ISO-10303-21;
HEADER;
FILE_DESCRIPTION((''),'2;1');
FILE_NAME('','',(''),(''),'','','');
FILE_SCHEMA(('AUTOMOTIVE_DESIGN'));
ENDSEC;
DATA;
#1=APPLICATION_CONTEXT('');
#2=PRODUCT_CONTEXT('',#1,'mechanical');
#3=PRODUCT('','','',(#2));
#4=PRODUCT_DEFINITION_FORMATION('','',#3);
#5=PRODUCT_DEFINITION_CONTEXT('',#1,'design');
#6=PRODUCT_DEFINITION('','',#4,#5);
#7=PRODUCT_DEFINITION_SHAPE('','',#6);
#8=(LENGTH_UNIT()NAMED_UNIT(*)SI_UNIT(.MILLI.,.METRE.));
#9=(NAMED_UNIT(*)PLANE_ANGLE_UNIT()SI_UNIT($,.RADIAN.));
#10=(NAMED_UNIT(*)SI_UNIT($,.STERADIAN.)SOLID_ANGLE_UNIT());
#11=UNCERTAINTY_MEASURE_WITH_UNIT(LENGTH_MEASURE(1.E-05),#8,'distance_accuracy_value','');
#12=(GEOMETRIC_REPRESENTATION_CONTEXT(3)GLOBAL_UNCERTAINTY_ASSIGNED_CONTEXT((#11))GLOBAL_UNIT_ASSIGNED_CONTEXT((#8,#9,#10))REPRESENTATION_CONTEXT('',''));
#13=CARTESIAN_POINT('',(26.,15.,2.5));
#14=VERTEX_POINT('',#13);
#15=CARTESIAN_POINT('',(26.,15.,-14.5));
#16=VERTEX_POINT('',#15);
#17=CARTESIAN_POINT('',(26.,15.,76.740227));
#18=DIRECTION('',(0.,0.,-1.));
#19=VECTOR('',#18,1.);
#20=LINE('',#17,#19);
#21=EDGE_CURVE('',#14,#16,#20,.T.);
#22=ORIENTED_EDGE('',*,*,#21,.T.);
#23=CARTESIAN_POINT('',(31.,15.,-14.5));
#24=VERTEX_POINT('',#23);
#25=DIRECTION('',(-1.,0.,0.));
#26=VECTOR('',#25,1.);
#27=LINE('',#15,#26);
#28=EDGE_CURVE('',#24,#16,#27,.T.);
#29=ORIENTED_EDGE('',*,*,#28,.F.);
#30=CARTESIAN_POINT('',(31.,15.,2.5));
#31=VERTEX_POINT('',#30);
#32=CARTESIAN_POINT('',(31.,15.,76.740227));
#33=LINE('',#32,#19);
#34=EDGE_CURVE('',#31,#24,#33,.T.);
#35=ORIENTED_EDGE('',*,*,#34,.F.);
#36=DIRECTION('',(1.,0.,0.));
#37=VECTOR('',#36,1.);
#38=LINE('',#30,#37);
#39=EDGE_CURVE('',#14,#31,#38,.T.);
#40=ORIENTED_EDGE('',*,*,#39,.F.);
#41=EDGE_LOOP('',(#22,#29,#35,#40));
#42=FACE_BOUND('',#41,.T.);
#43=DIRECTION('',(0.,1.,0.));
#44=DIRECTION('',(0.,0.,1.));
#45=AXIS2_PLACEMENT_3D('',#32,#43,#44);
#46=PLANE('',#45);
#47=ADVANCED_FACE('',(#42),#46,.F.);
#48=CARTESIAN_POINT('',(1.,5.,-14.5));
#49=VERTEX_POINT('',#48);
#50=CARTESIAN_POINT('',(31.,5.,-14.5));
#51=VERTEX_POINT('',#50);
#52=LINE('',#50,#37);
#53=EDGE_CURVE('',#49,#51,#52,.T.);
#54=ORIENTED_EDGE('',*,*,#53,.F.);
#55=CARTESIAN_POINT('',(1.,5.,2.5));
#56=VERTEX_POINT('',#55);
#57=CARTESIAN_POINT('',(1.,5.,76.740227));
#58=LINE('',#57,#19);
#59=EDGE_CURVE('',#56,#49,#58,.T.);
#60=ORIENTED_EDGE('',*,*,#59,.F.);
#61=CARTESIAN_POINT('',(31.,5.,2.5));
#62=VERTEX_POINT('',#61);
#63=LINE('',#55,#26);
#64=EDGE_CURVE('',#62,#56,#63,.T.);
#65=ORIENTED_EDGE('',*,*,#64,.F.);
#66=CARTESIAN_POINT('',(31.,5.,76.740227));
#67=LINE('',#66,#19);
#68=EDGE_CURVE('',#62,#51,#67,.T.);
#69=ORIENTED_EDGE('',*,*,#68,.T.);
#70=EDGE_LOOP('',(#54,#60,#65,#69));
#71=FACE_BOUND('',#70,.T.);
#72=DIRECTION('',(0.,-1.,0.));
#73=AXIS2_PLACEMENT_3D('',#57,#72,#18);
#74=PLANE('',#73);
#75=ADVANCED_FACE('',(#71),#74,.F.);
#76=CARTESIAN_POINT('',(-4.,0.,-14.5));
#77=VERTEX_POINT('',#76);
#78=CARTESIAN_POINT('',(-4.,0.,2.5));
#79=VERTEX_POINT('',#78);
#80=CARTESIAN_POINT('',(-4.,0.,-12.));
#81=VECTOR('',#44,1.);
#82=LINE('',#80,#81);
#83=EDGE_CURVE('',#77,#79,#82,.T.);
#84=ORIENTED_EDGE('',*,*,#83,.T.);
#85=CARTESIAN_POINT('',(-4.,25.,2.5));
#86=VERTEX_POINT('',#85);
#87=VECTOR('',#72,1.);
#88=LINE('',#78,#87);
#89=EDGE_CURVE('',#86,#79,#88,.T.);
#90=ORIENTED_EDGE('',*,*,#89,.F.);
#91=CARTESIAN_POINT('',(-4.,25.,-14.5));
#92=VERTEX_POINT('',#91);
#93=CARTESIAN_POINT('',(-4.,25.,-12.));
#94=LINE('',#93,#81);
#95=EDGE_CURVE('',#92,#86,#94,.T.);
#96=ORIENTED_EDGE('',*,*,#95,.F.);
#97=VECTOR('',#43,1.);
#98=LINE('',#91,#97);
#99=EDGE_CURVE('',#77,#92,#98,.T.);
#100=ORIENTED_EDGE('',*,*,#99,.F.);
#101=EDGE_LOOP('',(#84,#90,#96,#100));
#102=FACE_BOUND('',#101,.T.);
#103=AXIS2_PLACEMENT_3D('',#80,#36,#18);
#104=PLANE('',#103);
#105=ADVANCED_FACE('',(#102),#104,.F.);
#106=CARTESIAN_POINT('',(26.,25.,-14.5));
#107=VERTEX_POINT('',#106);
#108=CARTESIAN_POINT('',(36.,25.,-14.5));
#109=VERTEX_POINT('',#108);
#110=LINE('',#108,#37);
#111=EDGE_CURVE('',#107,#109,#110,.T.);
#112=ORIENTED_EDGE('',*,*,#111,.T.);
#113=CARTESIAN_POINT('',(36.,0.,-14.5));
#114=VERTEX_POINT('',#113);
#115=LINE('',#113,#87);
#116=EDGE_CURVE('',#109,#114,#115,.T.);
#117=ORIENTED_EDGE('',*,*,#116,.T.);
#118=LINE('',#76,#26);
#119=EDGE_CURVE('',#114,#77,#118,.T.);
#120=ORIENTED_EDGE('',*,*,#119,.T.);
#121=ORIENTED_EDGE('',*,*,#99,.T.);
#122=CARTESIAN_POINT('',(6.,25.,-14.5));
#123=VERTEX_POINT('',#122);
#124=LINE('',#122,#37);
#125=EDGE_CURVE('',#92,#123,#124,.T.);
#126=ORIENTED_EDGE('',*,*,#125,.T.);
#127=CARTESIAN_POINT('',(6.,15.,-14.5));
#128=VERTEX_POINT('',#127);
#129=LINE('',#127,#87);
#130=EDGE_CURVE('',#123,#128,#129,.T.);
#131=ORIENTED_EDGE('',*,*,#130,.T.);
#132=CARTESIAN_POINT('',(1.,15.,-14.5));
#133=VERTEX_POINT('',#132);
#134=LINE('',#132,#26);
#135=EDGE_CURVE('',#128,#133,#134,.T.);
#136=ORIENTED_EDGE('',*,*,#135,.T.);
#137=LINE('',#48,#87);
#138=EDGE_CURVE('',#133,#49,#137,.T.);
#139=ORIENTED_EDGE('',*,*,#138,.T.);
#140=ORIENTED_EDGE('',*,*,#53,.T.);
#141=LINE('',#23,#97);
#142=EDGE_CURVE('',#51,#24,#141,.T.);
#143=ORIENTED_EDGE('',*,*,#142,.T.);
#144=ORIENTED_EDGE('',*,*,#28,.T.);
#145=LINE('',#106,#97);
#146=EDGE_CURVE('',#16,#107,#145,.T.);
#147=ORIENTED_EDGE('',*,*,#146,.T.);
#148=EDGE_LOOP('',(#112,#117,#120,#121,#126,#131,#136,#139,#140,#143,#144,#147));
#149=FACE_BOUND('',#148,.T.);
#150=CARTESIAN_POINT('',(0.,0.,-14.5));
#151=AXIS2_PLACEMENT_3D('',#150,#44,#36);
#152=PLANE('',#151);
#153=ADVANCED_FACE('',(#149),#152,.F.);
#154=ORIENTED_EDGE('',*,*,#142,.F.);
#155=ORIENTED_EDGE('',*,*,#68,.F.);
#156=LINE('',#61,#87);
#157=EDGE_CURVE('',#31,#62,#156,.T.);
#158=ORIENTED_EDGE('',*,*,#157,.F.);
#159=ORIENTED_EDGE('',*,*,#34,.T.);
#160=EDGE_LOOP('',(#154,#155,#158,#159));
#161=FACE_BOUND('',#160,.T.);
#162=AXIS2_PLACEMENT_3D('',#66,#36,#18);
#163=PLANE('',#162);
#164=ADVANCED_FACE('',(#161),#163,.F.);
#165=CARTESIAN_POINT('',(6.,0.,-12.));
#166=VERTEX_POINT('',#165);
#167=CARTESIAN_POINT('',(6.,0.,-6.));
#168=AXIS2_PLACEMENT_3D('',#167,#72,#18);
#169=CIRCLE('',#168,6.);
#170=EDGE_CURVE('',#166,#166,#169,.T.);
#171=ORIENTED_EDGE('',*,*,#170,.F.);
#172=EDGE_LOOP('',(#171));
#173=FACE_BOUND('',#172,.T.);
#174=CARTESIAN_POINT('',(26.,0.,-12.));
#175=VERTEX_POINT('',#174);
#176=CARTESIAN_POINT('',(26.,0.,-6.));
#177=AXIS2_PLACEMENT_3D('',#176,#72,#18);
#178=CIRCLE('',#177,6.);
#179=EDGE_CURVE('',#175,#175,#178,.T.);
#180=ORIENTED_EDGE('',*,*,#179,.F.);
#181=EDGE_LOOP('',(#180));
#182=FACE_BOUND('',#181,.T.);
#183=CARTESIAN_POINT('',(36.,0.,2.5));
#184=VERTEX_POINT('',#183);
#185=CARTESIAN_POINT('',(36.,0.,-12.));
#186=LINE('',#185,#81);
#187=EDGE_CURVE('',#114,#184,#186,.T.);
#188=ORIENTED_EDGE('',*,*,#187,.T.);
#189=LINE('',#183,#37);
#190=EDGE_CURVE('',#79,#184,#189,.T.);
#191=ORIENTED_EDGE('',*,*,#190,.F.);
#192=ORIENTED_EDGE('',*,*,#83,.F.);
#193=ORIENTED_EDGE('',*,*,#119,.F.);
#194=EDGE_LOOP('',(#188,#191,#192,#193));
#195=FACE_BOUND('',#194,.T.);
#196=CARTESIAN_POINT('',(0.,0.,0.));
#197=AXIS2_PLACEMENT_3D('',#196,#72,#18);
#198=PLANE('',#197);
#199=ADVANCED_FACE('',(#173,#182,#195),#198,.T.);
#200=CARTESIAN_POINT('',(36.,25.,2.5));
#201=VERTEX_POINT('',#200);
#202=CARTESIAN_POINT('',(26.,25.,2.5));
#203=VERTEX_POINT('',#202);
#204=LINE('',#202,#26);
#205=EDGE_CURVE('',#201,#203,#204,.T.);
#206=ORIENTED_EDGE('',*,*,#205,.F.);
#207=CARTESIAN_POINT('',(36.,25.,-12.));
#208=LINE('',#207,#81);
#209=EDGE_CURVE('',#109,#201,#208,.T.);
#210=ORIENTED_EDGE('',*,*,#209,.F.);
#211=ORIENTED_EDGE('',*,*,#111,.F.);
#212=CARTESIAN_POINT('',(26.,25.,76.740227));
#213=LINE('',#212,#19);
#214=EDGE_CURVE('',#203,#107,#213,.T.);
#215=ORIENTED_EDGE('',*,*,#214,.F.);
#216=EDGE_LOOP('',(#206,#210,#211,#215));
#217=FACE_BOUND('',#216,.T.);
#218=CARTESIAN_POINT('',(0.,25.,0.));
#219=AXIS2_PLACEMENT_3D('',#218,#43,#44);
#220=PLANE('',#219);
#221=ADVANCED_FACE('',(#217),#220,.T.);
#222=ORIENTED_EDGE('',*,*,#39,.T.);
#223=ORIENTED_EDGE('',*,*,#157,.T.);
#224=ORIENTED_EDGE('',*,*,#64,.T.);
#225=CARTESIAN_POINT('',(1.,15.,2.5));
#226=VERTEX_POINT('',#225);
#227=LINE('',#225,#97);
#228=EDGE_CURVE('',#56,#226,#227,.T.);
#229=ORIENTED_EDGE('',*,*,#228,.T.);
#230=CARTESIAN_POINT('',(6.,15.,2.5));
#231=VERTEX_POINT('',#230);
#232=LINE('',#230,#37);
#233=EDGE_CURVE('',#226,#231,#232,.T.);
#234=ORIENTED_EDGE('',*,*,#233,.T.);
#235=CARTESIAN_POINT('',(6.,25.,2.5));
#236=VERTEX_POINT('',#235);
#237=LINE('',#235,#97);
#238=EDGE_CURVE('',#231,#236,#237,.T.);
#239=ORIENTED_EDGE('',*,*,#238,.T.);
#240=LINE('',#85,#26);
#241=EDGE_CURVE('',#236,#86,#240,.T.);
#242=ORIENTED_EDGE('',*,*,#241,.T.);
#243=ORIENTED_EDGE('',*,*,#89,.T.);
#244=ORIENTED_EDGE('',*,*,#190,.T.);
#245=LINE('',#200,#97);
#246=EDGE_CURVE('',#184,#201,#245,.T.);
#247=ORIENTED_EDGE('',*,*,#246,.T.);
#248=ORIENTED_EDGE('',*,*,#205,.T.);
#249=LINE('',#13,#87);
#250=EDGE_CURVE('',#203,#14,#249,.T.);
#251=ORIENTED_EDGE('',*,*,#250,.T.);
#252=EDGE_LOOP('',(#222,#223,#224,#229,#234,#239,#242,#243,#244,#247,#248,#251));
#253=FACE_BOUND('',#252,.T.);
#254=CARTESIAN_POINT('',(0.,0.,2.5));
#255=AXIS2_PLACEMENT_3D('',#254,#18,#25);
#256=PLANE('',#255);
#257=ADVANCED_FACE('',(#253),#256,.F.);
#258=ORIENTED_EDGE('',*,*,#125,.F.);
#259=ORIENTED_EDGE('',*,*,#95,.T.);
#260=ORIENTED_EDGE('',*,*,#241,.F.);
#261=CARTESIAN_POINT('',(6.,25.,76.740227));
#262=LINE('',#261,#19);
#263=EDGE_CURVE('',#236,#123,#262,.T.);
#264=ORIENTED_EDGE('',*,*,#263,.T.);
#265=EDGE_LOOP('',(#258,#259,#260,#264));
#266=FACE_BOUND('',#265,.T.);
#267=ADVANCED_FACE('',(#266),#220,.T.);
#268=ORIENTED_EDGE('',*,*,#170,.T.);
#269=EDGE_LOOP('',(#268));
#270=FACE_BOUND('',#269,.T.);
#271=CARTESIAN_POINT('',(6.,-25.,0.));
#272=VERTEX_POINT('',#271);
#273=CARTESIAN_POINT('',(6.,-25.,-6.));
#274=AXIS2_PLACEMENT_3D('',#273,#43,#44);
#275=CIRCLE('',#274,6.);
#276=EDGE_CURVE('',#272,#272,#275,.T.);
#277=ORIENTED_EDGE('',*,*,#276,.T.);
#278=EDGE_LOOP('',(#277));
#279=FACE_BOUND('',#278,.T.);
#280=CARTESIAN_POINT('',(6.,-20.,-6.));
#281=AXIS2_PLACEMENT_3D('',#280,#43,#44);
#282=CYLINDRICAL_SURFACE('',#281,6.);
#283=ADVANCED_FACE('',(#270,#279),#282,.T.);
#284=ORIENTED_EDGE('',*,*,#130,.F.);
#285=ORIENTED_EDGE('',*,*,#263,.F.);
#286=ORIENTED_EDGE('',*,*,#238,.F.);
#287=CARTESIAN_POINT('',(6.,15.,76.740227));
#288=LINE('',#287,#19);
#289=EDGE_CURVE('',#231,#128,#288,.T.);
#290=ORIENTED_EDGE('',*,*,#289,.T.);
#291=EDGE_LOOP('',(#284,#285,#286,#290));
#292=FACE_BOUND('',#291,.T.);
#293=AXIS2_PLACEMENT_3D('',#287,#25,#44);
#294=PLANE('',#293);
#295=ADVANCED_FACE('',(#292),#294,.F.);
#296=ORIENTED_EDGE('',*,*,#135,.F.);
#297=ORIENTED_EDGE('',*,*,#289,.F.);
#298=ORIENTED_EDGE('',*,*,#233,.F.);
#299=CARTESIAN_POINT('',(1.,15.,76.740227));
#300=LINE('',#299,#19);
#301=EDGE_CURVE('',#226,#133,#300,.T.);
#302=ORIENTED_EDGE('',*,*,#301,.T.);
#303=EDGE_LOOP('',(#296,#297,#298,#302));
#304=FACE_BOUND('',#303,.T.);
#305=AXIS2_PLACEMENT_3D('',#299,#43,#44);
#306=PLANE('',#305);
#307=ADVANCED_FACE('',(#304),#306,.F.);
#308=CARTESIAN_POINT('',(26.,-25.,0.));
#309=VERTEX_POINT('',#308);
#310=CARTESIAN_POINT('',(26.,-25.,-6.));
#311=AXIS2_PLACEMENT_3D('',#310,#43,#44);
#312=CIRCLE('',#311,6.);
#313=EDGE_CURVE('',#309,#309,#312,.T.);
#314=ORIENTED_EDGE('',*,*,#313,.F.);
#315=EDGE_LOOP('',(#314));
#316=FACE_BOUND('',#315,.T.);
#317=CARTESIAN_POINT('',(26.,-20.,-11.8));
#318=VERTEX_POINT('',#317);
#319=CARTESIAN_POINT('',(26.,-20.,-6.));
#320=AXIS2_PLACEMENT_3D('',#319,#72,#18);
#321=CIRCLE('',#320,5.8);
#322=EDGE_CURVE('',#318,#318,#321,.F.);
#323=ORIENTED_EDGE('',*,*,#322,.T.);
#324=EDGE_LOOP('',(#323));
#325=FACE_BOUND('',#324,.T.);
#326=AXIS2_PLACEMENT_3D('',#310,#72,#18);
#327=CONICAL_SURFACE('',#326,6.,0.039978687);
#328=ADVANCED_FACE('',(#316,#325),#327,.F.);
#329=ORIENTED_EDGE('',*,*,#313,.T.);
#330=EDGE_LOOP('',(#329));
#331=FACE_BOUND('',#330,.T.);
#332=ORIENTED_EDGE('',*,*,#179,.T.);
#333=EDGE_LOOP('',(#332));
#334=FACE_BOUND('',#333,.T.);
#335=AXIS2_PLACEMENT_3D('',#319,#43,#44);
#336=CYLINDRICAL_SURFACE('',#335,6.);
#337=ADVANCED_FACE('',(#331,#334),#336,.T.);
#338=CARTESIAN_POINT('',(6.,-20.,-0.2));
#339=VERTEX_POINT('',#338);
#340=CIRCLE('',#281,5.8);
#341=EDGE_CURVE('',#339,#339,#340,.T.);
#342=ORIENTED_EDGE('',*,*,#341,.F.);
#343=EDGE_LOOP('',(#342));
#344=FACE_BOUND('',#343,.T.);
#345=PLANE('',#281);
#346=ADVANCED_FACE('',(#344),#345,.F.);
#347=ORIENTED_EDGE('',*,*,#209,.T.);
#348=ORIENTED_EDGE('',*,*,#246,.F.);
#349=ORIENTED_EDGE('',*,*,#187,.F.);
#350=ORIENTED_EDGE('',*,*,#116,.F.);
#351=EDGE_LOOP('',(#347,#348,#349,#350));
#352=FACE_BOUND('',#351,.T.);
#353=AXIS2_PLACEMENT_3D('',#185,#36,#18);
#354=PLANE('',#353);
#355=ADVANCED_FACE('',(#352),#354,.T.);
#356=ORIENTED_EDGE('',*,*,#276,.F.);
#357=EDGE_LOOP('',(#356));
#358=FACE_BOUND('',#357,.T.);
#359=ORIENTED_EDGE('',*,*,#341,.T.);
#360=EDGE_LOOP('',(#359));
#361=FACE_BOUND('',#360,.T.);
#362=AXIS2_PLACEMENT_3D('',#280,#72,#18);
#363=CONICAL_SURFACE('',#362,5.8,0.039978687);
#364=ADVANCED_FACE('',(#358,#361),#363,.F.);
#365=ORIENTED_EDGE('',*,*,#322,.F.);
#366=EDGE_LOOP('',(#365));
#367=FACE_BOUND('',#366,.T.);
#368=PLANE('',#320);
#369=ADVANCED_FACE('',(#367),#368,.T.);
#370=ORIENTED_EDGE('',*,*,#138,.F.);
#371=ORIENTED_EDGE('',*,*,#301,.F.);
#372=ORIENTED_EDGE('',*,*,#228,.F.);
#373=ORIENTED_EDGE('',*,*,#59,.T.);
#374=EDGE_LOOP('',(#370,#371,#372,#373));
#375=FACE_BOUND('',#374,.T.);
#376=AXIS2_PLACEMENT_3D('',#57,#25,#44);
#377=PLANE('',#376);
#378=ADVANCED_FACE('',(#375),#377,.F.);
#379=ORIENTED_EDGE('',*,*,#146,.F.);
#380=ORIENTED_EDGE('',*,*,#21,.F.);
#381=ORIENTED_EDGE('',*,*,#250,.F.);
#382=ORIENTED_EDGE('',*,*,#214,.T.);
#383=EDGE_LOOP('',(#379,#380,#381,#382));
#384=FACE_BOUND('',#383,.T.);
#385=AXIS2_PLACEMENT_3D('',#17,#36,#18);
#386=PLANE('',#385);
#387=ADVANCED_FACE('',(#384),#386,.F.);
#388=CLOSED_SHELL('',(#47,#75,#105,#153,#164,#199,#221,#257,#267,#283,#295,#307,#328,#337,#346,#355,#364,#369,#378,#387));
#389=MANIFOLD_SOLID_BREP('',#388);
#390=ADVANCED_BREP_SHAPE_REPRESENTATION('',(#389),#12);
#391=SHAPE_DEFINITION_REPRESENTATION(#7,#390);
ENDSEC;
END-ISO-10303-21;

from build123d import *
from build123d.topology import SkipClean

# Parameters (mm, degrees)
SKETCH_3_W          = 32
SKETCH_3_H          = 12
EXTRUDE_3_DEPTH     = 5
SKETCH_4_R          = 5
EXTRUDE_4_DEPTH     = 10
SKETCH_8_R          = 5
EXTRUDE_6_DEPTH     = 5
SKETCH_9_R          = 4.8
CUT_EXTRUDE_2_DEPTH = 0.5
EXTRUDE_START       = 5
SKETCH_36_R         = 5
SKETCH_36_R_2       = 4.98
EXTRUDE_11_DEPTH    = 5
SKETCH_46_W         = 32
SKETCH_46_H         = 12
EXTRUDE_12_DEPTH    = 20
SKETCH_47_W         = 4
SKETCH_47_H         = 25
EXTRUDE_13_DEPTH    = 12
SKETCH_48_W         = 4
SKETCH_48_H         = 25
EXTRUDE_14_DEPTH    = 12
CUT_EXTRUDE_START   = -12
CUT_EXTRUDE_5_DEPTH = 12
SKETCH_50_R         = 6
EXTRUDE_15_DEPTH    = 20
SKETCH_51_R         = 6
EXTRUDE_16_DEPTH    = 20
EXTRUDE_17_DEPTH    = 2.5
EXTRUDE_18_DEPTH    = 2.5


# Read off the part's stored shape, not the designer's step: the extrude step
with BuildPart() as part:
    # 草图3 → 凸台-拉伸3 (new body)
    with BuildSketch(Plane(origin=(0, 0, 0), x_dir=(1, 0, 0), z_dir=(0, 1, 0))):
        with Locations((16, 6)):
            Rectangle(SKETCH_3_W, SKETCH_3_H)
    extrude(amount=EXTRUDE_3_DEPTH)

    # 草图4 → 凸台-拉伸4 (add)
    with BuildSketch(Plane.XZ):
        with Locations(Location((6, -6, 0), (0, 0, 270))):
            Circle(SKETCH_4_R)
        with Locations(Location((26, -6, 0), (0, 0, 270))):
            Circle(SKETCH_4_R)
    extrude(amount=EXTRUDE_4_DEPTH)

    # 草图8 → 凸台-拉伸6 (add)
    with BuildSketch(Plane.XZ.offset(10)):
        with Locations(Location((6, -6, 0), (0, 0, 270))):
            Circle(SKETCH_8_R)
    extrude(amount=EXTRUDE_6_DEPTH)

    # 草图9 → 切除-拉伸2 (cut)
    with BuildSketch(Plane.XZ.offset(15)):
        with Locations(Location((6, -6, 0), (0, 0, 270))):
            Circle(SKETCH_9_R)
    extrude(amount=-CUT_EXTRUDE_2_DEPTH, mode=Mode.SUBTRACT)



with BuildPart() as body_2:
    # 草图14 → 旋转2 (revolve)
    with BuildSketch(Plane.XY.offset(-6), mode=Mode.PRIVATE) as revolve_2_sk:
        Polygon((1.021282046, -15), (1.021282046, -20), (1.221282046, -15), align=None)
    revolve(revolve_2_sk.sketch.rotate(Axis((6, -15, -6), (0, 1, 0)), 270), axis=Axis((6, -15, -6), (0, 1, 0)))


with BuildPart() as part_1:
    with SkipClean():  # the faces are left unmerged after this step: merging them gives an invalid solid
        add(part.part)

        add(body_2.part)  # 凸台-拉伸11 merges body 2
        # 草图36 → 凸台-拉伸11 (add)
        with BuildSketch(Plane(origin=(0, -20, 0), x_dir=(1, 0, 0), z_dir=(0, 1, 0)).offset(EXTRUDE_START)):
            with Locations(Location((6, 6, 0), (0, 0, 270))):
                Circle(SKETCH_36_R)
            with Locations(Location((6, 6, 0), (0, 0, 90))):
                Circle(SKETCH_36_R_2, mode=Mode.SUBTRACT)
        extrude(amount=-EXTRUDE_11_DEPTH)

    # 草图46 → 凸台-拉伸12 (add)
    with SkipClean():  # the faces are left unmerged after this step: merging them gives an invalid solid
        with BuildSketch(Plane(origin=(0, 5, 0), x_dir=(1, 0, 0), z_dir=(0, 1, 0))):
            with Locations((16, 6)):
                Rectangle(SKETCH_46_W, SKETCH_46_H)
        extrude(amount=EXTRUDE_12_DEPTH)

    # 草图47 → 凸台-拉伸13 (add)
    with SkipClean():  # the faces are left unmerged after this step: merging them gives an invalid solid
        with BuildSketch(Plane.XY):
            with Locations((-2, 12.5)):
                Rectangle(SKETCH_47_W, SKETCH_47_H)
        extrude(amount=-EXTRUDE_13_DEPTH)

    # 草图48 → 凸台-拉伸14 (add)
    with SkipClean():  # the faces are left unmerged after this step: merging them gives an invalid solid
        with BuildSketch(Plane.XY):
            with Locations((34, 12.5)):
                Rectangle(SKETCH_48_W, SKETCH_48_H)
        extrude(amount=-EXTRUDE_14_DEPTH)

    # 切除-拉伸5 outline → 切除-拉伸5 (cut)
    with SkipClean():  # the faces are left unmerged after this step: merging them gives an invalid solid
        with BuildSketch(Plane.XY.offset(CUT_EXTRUDE_START)):
            Polygon((26, 25), (6, 25), (6, 15), (1, 15), (1, 5), (31, 5), (31, 15), (26, 15), align=None)
        extrude(amount=CUT_EXTRUDE_5_DEPTH, mode=Mode.SUBTRACT)

    # 草图50 → 凸台-拉伸15 (add)
    with BuildSketch(Plane.XZ):
        with Locations(Location((6, -6, 0), (0, 0, 270))):
            Circle(SKETCH_50_R)
    extrude(amount=EXTRUDE_15_DEPTH)

    # 草图51 → 凸台-拉伸16 (add)
    with BuildSketch(Plane.XZ):
        with Locations(Location((26, -6, 0), (0, 0, 270))):
            Circle(SKETCH_51_R)
    extrude(amount=EXTRUDE_16_DEPTH)

    # 草图52 → 旋转3 (revolve)
    with BuildSketch(Plane.XY.offset(-6), mode=Mode.PRIVATE) as revolve_3_sk:
        Polygon((0, -20), (0, -25), (0.2, -20), align=None)
    revolve(revolve_3_sk.sketch.rotate(Axis((6, -20, -6), (0, -1, 0)), 270), axis=Axis((6, -20, -6), (0, -1, 0)))

    # 草图53 → 旋转4 (revolve)
    with BuildSketch(Plane.XY.offset(-6), mode=Mode.PRIVATE) as revolve_4_sk:
        Polygon((20, -20), (20, -25), (20.2, -20), align=None)
    revolve(revolve_4_sk.sketch.rotate(Axis((26, -20, -6), (0, -1, 0)), 270), axis=Axis((26, -20, -6), (0, -1, 0)))

    # 草图55 → 凸台-拉伸17 (add)
    with BuildSketch(Plane.XY):
        Polygon((-4, 25), (6, 25), (6, 15), (1, 15), (1, 5), (31, 5), (31, 15), (26, 15), (26, 25), (36, 25), (36, 0), (-4, 0), align=None)
    extrude(amount=EXTRUDE_17_DEPTH)

    # 草图56 → 凸台-拉伸18 (add)
    with BuildSketch(Plane(origin=(0, 0, -12), x_dir=(-1, 0, 0), z_dir=(0, 0, -1))):
        Polygon((-36, 25), (-26, 25), (-26, 15), (-31, 15), (-31, 5), (-1, 5), (-1, 15), (-6, 15), (-6, 25), (4, 25), (4, 0), (-36, 0), align=None)
    extrude(amount=EXTRUDE_18_DEPTH)


solid = part_1.part
